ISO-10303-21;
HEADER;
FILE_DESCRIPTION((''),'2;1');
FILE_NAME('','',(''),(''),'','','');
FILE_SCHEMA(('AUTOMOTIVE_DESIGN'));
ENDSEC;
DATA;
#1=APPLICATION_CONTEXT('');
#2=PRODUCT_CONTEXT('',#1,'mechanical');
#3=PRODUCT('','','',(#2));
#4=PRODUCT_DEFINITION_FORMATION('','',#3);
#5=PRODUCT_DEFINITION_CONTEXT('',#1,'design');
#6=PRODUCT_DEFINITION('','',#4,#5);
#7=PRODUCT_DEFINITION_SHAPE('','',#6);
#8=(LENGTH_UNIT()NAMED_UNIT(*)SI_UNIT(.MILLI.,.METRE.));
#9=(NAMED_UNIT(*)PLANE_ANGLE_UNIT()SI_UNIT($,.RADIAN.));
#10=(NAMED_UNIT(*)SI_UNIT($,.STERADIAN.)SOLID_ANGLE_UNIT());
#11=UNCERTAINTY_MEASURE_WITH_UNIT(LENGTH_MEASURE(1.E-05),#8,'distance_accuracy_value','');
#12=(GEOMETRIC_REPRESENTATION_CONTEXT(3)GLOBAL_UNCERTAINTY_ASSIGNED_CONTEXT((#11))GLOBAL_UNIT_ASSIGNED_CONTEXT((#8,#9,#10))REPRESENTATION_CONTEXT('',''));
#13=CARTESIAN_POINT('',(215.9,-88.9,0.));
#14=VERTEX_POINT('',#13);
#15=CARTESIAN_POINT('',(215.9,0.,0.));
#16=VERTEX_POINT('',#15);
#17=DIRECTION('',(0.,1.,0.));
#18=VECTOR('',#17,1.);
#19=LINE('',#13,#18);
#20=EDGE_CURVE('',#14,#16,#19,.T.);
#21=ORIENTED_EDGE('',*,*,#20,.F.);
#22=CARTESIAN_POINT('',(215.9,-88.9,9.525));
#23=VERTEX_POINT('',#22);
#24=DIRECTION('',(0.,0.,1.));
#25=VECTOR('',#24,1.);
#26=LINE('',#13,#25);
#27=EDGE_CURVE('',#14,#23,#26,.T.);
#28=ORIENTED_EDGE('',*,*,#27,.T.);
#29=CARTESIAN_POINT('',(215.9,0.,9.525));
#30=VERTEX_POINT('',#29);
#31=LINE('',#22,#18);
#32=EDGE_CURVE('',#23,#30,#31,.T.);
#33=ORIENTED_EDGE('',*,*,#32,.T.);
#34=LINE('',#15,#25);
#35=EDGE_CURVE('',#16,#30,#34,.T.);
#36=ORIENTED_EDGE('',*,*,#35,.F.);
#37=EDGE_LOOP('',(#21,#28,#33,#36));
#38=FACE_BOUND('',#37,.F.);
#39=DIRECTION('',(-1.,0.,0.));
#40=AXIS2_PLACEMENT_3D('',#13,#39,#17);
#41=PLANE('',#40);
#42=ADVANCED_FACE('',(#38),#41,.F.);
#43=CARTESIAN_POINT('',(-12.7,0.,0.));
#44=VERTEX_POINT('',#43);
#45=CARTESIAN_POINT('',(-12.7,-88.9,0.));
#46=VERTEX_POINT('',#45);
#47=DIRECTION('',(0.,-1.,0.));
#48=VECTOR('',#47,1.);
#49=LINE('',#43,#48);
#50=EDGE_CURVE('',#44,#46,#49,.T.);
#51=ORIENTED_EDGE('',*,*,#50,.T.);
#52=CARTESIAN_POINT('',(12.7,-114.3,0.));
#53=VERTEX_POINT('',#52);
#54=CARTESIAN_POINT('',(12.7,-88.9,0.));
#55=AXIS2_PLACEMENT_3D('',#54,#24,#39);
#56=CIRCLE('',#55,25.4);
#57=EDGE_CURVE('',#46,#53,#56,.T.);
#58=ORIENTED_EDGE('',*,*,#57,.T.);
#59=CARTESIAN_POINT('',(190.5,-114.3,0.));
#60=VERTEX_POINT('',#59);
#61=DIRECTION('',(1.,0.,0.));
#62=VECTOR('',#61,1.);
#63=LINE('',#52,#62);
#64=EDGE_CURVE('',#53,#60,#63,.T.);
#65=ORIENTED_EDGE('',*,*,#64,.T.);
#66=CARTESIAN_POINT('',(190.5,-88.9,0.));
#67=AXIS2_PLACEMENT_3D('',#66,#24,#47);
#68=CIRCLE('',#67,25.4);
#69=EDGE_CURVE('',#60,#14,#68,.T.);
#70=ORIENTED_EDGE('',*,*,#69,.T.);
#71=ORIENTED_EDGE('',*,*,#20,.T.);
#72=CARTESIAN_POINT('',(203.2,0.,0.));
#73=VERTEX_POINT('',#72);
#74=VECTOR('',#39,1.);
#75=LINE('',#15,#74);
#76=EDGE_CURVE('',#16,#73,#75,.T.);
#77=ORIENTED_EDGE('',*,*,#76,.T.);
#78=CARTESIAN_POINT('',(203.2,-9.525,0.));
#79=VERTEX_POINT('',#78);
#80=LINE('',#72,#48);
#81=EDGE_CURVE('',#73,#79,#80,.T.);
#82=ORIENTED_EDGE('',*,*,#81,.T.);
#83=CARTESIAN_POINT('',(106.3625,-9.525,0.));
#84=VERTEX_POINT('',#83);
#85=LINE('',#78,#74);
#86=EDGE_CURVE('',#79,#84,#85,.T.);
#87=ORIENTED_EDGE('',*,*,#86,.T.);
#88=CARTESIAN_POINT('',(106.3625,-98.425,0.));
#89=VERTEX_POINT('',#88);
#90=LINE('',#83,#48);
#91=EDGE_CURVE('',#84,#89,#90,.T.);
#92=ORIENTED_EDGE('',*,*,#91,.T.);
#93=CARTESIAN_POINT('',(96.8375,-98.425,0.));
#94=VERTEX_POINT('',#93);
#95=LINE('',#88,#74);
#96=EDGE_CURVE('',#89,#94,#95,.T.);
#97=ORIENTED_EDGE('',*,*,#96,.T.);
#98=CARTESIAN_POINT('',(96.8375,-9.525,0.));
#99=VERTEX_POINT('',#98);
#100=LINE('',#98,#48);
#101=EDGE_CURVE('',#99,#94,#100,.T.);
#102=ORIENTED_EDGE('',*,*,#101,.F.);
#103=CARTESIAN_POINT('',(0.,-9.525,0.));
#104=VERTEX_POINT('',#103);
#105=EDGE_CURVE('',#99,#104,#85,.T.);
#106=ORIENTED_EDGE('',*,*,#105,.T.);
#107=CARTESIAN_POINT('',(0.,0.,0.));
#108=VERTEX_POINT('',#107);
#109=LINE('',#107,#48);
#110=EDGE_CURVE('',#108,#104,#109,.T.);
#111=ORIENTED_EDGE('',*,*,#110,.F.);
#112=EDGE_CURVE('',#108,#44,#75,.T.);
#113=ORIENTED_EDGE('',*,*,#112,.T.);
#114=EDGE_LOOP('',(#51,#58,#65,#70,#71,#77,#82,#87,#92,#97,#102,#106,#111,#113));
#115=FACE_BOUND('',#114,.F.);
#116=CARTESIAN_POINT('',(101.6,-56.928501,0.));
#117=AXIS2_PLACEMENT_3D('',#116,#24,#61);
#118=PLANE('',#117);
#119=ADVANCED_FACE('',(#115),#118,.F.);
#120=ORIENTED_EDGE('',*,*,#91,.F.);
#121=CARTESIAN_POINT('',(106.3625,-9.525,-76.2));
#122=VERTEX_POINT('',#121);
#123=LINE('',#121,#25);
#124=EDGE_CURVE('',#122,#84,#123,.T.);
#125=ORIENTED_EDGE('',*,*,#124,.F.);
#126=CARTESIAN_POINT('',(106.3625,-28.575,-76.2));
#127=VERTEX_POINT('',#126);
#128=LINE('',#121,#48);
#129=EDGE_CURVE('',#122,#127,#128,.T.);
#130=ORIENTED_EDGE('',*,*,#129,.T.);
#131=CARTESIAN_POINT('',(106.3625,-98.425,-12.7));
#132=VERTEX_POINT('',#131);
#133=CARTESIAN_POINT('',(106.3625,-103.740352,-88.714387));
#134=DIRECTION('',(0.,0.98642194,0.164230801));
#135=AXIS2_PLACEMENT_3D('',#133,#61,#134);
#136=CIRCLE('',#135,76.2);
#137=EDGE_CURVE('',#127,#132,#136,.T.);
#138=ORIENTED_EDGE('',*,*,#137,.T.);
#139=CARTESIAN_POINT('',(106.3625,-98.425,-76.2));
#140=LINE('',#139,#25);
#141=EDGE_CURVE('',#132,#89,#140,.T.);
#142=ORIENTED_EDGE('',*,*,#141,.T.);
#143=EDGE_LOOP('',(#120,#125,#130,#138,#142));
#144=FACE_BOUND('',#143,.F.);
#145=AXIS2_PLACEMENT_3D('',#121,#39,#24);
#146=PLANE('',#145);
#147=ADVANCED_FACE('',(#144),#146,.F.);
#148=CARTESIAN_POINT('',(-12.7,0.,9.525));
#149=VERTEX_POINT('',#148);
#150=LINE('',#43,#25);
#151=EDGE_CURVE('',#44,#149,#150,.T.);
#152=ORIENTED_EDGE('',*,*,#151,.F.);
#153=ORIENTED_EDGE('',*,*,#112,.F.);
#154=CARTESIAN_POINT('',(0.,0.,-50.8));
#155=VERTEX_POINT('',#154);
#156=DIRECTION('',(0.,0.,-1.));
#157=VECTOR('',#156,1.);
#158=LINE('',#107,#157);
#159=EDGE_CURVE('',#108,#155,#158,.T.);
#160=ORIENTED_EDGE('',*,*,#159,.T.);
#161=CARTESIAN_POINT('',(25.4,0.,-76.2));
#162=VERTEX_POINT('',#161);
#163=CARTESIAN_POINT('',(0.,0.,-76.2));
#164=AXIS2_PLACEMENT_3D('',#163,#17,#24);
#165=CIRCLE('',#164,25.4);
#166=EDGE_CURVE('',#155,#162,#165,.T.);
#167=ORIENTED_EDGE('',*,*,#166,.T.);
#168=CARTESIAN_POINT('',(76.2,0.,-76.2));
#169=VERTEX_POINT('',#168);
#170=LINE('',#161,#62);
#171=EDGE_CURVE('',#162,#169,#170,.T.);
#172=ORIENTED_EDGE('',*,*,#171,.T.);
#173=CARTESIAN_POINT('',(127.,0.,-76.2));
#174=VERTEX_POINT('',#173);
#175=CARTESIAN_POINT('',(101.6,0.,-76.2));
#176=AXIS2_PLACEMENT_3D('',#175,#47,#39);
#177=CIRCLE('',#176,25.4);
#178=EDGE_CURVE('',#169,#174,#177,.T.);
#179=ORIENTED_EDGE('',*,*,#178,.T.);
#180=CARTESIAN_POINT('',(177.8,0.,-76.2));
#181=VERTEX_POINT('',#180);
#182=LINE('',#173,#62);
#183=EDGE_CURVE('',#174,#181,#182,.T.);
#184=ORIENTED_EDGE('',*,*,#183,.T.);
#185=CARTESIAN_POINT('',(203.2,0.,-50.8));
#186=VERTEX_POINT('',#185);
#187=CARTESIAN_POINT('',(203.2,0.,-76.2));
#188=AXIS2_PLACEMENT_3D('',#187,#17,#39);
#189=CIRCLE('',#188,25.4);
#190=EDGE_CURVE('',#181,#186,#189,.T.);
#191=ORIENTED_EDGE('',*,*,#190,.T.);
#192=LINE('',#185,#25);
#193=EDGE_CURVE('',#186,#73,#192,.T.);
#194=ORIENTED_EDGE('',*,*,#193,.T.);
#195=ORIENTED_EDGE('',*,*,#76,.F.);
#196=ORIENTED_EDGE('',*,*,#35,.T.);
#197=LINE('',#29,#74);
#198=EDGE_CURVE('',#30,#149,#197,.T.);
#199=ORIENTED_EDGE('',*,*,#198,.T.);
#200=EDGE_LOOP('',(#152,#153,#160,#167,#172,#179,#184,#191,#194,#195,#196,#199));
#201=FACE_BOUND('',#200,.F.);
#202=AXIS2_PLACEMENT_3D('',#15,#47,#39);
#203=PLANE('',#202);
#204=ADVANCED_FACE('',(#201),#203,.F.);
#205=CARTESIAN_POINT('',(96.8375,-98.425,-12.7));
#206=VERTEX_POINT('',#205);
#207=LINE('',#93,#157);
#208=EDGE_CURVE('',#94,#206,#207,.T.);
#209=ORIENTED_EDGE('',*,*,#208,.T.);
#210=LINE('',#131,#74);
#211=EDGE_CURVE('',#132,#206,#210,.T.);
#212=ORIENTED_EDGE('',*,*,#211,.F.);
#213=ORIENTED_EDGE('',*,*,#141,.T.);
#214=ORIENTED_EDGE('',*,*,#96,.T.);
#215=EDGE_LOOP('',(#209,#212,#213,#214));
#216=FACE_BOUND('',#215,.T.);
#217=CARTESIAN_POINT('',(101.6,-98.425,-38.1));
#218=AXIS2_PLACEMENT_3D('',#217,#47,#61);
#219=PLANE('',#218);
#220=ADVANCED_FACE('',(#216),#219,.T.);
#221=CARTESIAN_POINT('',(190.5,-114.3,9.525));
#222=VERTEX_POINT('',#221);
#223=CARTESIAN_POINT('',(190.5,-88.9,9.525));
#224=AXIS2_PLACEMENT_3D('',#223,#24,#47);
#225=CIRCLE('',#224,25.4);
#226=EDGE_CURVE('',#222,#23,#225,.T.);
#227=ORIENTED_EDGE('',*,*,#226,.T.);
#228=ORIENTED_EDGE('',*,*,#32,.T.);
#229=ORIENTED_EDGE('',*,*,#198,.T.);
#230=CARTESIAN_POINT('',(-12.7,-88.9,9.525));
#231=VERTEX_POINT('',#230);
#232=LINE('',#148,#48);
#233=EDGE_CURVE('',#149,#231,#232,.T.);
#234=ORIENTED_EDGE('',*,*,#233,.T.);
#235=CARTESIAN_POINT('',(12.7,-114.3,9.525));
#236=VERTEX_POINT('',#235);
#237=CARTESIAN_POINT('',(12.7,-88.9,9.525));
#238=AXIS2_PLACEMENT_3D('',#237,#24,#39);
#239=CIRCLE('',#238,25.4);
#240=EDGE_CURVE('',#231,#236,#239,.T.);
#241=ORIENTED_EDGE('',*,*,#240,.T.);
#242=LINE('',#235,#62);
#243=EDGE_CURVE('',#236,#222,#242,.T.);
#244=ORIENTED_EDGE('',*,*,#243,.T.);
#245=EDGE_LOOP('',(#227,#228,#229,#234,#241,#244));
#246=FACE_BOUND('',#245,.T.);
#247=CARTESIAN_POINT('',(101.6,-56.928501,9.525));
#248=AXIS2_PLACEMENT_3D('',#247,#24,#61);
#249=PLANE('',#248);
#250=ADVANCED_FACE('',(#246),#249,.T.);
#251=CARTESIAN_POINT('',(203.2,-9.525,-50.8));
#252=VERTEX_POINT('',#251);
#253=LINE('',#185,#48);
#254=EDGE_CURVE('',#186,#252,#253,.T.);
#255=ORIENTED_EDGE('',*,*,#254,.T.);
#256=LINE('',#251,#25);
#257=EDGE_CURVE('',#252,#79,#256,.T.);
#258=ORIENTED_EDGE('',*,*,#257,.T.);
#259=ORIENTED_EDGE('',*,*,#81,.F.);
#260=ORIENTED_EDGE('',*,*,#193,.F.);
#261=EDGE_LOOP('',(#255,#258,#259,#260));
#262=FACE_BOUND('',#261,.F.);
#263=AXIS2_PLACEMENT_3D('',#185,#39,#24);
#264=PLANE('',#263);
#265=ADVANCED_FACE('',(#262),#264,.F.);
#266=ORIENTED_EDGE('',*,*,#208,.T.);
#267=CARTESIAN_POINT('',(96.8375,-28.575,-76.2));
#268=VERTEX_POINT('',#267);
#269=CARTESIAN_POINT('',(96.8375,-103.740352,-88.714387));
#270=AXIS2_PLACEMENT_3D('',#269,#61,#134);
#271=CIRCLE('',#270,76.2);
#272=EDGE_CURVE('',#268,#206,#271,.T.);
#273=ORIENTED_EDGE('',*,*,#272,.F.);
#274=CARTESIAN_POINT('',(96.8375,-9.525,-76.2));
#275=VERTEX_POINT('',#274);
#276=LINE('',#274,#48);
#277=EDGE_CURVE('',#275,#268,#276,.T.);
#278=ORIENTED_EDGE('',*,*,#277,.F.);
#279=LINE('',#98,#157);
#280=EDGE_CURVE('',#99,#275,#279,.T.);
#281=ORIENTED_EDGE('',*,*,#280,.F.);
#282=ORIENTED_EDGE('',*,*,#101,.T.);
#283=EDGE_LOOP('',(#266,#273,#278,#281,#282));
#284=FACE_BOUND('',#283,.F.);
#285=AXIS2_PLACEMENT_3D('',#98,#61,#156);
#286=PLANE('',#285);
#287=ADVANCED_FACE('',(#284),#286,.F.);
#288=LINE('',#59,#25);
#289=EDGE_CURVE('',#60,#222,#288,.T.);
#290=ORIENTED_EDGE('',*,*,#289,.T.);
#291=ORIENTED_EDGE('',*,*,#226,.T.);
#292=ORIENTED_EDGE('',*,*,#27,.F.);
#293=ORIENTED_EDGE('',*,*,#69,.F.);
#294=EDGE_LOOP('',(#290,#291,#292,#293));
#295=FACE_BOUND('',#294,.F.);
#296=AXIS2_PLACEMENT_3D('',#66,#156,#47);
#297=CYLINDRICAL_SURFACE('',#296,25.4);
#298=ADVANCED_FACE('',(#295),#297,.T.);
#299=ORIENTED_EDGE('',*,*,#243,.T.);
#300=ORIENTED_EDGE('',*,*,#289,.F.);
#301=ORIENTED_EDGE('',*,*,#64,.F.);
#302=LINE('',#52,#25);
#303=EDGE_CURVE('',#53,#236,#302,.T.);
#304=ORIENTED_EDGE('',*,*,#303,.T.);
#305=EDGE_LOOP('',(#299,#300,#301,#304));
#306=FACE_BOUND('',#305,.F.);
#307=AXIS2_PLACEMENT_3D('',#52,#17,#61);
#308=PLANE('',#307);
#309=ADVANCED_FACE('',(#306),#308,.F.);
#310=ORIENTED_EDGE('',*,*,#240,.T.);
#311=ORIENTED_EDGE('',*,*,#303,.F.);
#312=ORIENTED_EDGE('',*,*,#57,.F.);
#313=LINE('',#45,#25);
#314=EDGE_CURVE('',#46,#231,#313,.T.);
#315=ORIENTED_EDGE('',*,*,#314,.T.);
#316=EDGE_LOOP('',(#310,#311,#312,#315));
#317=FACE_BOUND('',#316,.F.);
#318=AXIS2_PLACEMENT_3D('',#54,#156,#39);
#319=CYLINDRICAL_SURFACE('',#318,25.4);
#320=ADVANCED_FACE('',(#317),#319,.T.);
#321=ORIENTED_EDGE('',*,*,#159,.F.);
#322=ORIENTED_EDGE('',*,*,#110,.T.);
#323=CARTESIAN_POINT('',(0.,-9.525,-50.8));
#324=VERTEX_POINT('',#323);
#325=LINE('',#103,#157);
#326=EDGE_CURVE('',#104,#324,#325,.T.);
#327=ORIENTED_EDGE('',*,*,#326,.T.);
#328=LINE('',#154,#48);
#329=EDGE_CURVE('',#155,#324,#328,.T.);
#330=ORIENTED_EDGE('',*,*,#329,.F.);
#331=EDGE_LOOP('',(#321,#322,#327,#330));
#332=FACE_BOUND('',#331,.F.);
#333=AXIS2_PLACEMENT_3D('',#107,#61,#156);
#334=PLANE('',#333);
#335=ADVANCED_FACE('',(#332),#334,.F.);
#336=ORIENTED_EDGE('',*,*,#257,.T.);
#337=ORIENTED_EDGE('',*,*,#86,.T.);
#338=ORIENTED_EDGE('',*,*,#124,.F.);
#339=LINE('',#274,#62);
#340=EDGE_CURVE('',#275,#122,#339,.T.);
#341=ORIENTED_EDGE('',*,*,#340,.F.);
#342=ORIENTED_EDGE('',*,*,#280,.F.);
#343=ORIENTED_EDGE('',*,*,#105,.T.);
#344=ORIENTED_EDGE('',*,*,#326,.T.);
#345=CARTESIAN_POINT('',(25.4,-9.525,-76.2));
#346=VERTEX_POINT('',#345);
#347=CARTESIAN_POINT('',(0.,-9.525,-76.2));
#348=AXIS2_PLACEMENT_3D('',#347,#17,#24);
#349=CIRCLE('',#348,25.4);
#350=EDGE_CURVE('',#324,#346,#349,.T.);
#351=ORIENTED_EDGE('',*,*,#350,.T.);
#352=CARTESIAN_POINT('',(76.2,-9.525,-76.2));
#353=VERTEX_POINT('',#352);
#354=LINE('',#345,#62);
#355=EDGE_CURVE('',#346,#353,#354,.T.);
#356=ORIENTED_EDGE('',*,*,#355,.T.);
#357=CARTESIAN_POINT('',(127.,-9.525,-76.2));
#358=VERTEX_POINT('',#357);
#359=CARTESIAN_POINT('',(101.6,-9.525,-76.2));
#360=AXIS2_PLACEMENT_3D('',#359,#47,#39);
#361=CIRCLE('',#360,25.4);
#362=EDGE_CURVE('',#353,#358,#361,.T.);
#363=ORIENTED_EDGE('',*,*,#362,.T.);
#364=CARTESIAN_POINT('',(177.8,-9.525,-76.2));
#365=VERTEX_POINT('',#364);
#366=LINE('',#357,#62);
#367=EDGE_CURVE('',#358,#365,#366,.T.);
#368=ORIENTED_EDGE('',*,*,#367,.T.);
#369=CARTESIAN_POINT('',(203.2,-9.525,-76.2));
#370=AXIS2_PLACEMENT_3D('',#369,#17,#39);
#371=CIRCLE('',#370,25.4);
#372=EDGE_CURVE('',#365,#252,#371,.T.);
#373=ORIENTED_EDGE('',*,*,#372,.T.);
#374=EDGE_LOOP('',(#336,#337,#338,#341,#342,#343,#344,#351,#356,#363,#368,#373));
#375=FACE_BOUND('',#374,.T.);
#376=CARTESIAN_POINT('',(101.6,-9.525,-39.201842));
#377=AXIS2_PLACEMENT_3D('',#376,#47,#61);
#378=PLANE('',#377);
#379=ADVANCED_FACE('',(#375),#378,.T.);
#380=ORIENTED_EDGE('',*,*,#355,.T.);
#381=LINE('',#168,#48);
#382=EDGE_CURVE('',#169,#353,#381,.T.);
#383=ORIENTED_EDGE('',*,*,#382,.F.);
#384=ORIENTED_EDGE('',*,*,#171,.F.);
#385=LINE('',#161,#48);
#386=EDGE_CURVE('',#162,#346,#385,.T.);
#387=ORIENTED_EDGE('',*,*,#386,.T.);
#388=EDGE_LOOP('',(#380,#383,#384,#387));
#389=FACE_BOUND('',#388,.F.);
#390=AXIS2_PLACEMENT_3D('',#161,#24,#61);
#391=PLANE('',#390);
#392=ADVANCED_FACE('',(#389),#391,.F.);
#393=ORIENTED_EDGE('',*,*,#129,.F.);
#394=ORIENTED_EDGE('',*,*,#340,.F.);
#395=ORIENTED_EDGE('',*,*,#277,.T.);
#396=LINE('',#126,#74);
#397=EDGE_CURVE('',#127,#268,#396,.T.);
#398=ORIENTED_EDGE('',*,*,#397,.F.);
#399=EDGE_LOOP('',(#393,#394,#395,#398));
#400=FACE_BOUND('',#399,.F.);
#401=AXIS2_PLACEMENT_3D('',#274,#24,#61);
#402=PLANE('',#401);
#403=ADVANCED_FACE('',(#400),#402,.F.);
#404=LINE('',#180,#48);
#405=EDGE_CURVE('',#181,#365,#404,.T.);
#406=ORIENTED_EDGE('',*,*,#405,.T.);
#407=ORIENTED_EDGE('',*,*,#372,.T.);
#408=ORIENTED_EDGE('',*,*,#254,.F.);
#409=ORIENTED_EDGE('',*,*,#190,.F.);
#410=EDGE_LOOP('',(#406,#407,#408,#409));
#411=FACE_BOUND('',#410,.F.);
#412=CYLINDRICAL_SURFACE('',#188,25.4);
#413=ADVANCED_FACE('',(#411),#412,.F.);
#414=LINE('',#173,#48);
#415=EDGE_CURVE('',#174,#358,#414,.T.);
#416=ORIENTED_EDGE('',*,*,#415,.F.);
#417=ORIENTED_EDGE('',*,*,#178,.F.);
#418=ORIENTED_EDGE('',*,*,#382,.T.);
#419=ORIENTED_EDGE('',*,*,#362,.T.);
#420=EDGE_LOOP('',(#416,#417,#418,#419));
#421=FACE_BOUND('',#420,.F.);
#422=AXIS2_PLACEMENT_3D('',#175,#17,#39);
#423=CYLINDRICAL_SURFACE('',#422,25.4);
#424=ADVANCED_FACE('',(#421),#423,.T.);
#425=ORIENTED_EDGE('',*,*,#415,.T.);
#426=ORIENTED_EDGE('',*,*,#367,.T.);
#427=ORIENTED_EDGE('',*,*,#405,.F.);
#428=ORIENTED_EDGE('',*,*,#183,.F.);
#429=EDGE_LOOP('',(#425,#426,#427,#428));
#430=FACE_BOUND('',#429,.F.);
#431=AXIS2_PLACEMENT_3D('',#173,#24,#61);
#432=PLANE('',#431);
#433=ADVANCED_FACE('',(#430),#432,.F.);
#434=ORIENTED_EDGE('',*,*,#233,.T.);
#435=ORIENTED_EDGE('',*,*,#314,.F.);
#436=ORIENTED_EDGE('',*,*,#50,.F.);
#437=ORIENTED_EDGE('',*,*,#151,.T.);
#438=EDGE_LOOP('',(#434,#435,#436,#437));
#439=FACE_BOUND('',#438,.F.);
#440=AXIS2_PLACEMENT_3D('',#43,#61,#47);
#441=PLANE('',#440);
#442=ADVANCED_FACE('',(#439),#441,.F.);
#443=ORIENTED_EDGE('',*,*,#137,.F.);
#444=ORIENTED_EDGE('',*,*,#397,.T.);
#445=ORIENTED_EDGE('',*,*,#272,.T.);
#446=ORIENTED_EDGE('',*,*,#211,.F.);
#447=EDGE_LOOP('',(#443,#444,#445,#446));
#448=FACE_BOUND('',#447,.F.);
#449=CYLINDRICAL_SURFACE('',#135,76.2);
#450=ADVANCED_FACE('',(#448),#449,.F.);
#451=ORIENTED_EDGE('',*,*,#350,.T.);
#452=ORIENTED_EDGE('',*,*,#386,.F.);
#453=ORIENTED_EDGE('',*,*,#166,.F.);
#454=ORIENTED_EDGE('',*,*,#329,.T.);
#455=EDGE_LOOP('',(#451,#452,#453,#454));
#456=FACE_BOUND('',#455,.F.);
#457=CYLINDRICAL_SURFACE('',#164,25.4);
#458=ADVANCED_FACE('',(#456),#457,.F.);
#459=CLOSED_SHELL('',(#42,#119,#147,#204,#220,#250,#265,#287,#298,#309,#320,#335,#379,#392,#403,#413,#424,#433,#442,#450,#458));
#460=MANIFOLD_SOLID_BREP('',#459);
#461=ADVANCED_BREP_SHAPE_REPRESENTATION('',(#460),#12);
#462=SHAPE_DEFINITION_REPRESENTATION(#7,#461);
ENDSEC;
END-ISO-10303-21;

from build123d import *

# Parameters (mm, degrees)
F1_DEPTH = 9.525
F3_DEPTH = 88.9
F5_DEPTH = 9.525
F7_DEPTH = 9.525


# Not quite as in the source:
# - a length typed as a fraction of an inch, garbled in the dataset ("3 / 203.2 mm" for 3/8 in), is restored


with BuildPart() as f1:
    # F0 (on Front) → F1 (new body)
    with BuildSketch(Plane.XZ):
        with BuildLine():
            Line((203.2, 0), (0, 0))
            Line((0, 0), (0, -50.8))
            ThreePointArc((0, -50.8), (17.9605122421, -58.2394877579), (25.4, -76.2))
            Line((25.4, -76.2), (76.2, -76.2))
            ThreePointArc((76.2, -76.2), (101.6, -101.6), (127, -76.2))
            Line((127, -76.2), (177.8, -76.2))
            ThreePointArc((177.8, -76.2), (185.2394877579, -58.2394877579), (203.2, -50.8))
            Line((203.2, -50.8), (203.2, 0))
        make_face()
    extrude(amount=F1_DEPTH)

    # F2 (on face) → F3 (join)
    with BuildSketch(Plane.XZ.offset(9.525)):
        Polygon((96.8375, 0), (96.8375, -76.2), (101.6, -76.2), (106.3625, -76.2), (106.3625, 0), align=None)
    extrude(amount=F3_DEPTH)

    # F4 (on face) → F5 (cut)
    with BuildSketch(Plane.YZ.offset(106.3625)):
        with BuildLine():
            Line((-98.425, -76.2), (-28.575, -76.2))
            ThreePointArc((-28.575, -76.2), (-52.4826849385, -32.3309534324), (-98.425, -12.7))
            Line((-98.425, -12.7), (-98.425, -76.2))
        make_face()
    extrude(amount=-F5_DEPTH, mode=Mode.SUBTRACT)

    # F6 (on face) → F7 (join)
    with BuildSketch(Plane.XY):
        with BuildLine():
            Line((0, -9.525), (0, 0))
            Line((0, 0), (-12.7, 0))
            Line((-12.7, 0), (-12.7, -88.9))
            ThreePointArc((-12.7, -88.9), (-5.2605122421, -106.8605122421), (12.7, -114.3))
            Line((12.7, -114.3), (190.5, -114.3))
            ThreePointArc((190.5, -114.3), (208.4605122421, -106.8605122421), (215.9, -88.9))
            Line((215.9, -88.9), (215.9, 0))
            Line((215.9, 0), (203.2, 0))
            Line((203.2, 0), (203.2, -9.525))
            Line((203.2, -9.525), (106.3625, -9.525))
            Line((106.3625, -9.525), (106.3625, -98.425))
            Line((106.3625, -98.425), (96.8375, -98.425))
            Line((96.8375, -98.425), (96.8375, -9.525))
            Line((96.8375, -9.525), (0, -9.525))
        make_face()
        Polygon((203.2, 0), (0, 0), (0, -9.525), (96.8375, -9.525), (96.8375, -98.425), (106.3625, -98.425), (106.3625, -9.525), (203.2, -9.525), align=None)
    extrude(amount=F7_DEPTH)


solid = f1.part
